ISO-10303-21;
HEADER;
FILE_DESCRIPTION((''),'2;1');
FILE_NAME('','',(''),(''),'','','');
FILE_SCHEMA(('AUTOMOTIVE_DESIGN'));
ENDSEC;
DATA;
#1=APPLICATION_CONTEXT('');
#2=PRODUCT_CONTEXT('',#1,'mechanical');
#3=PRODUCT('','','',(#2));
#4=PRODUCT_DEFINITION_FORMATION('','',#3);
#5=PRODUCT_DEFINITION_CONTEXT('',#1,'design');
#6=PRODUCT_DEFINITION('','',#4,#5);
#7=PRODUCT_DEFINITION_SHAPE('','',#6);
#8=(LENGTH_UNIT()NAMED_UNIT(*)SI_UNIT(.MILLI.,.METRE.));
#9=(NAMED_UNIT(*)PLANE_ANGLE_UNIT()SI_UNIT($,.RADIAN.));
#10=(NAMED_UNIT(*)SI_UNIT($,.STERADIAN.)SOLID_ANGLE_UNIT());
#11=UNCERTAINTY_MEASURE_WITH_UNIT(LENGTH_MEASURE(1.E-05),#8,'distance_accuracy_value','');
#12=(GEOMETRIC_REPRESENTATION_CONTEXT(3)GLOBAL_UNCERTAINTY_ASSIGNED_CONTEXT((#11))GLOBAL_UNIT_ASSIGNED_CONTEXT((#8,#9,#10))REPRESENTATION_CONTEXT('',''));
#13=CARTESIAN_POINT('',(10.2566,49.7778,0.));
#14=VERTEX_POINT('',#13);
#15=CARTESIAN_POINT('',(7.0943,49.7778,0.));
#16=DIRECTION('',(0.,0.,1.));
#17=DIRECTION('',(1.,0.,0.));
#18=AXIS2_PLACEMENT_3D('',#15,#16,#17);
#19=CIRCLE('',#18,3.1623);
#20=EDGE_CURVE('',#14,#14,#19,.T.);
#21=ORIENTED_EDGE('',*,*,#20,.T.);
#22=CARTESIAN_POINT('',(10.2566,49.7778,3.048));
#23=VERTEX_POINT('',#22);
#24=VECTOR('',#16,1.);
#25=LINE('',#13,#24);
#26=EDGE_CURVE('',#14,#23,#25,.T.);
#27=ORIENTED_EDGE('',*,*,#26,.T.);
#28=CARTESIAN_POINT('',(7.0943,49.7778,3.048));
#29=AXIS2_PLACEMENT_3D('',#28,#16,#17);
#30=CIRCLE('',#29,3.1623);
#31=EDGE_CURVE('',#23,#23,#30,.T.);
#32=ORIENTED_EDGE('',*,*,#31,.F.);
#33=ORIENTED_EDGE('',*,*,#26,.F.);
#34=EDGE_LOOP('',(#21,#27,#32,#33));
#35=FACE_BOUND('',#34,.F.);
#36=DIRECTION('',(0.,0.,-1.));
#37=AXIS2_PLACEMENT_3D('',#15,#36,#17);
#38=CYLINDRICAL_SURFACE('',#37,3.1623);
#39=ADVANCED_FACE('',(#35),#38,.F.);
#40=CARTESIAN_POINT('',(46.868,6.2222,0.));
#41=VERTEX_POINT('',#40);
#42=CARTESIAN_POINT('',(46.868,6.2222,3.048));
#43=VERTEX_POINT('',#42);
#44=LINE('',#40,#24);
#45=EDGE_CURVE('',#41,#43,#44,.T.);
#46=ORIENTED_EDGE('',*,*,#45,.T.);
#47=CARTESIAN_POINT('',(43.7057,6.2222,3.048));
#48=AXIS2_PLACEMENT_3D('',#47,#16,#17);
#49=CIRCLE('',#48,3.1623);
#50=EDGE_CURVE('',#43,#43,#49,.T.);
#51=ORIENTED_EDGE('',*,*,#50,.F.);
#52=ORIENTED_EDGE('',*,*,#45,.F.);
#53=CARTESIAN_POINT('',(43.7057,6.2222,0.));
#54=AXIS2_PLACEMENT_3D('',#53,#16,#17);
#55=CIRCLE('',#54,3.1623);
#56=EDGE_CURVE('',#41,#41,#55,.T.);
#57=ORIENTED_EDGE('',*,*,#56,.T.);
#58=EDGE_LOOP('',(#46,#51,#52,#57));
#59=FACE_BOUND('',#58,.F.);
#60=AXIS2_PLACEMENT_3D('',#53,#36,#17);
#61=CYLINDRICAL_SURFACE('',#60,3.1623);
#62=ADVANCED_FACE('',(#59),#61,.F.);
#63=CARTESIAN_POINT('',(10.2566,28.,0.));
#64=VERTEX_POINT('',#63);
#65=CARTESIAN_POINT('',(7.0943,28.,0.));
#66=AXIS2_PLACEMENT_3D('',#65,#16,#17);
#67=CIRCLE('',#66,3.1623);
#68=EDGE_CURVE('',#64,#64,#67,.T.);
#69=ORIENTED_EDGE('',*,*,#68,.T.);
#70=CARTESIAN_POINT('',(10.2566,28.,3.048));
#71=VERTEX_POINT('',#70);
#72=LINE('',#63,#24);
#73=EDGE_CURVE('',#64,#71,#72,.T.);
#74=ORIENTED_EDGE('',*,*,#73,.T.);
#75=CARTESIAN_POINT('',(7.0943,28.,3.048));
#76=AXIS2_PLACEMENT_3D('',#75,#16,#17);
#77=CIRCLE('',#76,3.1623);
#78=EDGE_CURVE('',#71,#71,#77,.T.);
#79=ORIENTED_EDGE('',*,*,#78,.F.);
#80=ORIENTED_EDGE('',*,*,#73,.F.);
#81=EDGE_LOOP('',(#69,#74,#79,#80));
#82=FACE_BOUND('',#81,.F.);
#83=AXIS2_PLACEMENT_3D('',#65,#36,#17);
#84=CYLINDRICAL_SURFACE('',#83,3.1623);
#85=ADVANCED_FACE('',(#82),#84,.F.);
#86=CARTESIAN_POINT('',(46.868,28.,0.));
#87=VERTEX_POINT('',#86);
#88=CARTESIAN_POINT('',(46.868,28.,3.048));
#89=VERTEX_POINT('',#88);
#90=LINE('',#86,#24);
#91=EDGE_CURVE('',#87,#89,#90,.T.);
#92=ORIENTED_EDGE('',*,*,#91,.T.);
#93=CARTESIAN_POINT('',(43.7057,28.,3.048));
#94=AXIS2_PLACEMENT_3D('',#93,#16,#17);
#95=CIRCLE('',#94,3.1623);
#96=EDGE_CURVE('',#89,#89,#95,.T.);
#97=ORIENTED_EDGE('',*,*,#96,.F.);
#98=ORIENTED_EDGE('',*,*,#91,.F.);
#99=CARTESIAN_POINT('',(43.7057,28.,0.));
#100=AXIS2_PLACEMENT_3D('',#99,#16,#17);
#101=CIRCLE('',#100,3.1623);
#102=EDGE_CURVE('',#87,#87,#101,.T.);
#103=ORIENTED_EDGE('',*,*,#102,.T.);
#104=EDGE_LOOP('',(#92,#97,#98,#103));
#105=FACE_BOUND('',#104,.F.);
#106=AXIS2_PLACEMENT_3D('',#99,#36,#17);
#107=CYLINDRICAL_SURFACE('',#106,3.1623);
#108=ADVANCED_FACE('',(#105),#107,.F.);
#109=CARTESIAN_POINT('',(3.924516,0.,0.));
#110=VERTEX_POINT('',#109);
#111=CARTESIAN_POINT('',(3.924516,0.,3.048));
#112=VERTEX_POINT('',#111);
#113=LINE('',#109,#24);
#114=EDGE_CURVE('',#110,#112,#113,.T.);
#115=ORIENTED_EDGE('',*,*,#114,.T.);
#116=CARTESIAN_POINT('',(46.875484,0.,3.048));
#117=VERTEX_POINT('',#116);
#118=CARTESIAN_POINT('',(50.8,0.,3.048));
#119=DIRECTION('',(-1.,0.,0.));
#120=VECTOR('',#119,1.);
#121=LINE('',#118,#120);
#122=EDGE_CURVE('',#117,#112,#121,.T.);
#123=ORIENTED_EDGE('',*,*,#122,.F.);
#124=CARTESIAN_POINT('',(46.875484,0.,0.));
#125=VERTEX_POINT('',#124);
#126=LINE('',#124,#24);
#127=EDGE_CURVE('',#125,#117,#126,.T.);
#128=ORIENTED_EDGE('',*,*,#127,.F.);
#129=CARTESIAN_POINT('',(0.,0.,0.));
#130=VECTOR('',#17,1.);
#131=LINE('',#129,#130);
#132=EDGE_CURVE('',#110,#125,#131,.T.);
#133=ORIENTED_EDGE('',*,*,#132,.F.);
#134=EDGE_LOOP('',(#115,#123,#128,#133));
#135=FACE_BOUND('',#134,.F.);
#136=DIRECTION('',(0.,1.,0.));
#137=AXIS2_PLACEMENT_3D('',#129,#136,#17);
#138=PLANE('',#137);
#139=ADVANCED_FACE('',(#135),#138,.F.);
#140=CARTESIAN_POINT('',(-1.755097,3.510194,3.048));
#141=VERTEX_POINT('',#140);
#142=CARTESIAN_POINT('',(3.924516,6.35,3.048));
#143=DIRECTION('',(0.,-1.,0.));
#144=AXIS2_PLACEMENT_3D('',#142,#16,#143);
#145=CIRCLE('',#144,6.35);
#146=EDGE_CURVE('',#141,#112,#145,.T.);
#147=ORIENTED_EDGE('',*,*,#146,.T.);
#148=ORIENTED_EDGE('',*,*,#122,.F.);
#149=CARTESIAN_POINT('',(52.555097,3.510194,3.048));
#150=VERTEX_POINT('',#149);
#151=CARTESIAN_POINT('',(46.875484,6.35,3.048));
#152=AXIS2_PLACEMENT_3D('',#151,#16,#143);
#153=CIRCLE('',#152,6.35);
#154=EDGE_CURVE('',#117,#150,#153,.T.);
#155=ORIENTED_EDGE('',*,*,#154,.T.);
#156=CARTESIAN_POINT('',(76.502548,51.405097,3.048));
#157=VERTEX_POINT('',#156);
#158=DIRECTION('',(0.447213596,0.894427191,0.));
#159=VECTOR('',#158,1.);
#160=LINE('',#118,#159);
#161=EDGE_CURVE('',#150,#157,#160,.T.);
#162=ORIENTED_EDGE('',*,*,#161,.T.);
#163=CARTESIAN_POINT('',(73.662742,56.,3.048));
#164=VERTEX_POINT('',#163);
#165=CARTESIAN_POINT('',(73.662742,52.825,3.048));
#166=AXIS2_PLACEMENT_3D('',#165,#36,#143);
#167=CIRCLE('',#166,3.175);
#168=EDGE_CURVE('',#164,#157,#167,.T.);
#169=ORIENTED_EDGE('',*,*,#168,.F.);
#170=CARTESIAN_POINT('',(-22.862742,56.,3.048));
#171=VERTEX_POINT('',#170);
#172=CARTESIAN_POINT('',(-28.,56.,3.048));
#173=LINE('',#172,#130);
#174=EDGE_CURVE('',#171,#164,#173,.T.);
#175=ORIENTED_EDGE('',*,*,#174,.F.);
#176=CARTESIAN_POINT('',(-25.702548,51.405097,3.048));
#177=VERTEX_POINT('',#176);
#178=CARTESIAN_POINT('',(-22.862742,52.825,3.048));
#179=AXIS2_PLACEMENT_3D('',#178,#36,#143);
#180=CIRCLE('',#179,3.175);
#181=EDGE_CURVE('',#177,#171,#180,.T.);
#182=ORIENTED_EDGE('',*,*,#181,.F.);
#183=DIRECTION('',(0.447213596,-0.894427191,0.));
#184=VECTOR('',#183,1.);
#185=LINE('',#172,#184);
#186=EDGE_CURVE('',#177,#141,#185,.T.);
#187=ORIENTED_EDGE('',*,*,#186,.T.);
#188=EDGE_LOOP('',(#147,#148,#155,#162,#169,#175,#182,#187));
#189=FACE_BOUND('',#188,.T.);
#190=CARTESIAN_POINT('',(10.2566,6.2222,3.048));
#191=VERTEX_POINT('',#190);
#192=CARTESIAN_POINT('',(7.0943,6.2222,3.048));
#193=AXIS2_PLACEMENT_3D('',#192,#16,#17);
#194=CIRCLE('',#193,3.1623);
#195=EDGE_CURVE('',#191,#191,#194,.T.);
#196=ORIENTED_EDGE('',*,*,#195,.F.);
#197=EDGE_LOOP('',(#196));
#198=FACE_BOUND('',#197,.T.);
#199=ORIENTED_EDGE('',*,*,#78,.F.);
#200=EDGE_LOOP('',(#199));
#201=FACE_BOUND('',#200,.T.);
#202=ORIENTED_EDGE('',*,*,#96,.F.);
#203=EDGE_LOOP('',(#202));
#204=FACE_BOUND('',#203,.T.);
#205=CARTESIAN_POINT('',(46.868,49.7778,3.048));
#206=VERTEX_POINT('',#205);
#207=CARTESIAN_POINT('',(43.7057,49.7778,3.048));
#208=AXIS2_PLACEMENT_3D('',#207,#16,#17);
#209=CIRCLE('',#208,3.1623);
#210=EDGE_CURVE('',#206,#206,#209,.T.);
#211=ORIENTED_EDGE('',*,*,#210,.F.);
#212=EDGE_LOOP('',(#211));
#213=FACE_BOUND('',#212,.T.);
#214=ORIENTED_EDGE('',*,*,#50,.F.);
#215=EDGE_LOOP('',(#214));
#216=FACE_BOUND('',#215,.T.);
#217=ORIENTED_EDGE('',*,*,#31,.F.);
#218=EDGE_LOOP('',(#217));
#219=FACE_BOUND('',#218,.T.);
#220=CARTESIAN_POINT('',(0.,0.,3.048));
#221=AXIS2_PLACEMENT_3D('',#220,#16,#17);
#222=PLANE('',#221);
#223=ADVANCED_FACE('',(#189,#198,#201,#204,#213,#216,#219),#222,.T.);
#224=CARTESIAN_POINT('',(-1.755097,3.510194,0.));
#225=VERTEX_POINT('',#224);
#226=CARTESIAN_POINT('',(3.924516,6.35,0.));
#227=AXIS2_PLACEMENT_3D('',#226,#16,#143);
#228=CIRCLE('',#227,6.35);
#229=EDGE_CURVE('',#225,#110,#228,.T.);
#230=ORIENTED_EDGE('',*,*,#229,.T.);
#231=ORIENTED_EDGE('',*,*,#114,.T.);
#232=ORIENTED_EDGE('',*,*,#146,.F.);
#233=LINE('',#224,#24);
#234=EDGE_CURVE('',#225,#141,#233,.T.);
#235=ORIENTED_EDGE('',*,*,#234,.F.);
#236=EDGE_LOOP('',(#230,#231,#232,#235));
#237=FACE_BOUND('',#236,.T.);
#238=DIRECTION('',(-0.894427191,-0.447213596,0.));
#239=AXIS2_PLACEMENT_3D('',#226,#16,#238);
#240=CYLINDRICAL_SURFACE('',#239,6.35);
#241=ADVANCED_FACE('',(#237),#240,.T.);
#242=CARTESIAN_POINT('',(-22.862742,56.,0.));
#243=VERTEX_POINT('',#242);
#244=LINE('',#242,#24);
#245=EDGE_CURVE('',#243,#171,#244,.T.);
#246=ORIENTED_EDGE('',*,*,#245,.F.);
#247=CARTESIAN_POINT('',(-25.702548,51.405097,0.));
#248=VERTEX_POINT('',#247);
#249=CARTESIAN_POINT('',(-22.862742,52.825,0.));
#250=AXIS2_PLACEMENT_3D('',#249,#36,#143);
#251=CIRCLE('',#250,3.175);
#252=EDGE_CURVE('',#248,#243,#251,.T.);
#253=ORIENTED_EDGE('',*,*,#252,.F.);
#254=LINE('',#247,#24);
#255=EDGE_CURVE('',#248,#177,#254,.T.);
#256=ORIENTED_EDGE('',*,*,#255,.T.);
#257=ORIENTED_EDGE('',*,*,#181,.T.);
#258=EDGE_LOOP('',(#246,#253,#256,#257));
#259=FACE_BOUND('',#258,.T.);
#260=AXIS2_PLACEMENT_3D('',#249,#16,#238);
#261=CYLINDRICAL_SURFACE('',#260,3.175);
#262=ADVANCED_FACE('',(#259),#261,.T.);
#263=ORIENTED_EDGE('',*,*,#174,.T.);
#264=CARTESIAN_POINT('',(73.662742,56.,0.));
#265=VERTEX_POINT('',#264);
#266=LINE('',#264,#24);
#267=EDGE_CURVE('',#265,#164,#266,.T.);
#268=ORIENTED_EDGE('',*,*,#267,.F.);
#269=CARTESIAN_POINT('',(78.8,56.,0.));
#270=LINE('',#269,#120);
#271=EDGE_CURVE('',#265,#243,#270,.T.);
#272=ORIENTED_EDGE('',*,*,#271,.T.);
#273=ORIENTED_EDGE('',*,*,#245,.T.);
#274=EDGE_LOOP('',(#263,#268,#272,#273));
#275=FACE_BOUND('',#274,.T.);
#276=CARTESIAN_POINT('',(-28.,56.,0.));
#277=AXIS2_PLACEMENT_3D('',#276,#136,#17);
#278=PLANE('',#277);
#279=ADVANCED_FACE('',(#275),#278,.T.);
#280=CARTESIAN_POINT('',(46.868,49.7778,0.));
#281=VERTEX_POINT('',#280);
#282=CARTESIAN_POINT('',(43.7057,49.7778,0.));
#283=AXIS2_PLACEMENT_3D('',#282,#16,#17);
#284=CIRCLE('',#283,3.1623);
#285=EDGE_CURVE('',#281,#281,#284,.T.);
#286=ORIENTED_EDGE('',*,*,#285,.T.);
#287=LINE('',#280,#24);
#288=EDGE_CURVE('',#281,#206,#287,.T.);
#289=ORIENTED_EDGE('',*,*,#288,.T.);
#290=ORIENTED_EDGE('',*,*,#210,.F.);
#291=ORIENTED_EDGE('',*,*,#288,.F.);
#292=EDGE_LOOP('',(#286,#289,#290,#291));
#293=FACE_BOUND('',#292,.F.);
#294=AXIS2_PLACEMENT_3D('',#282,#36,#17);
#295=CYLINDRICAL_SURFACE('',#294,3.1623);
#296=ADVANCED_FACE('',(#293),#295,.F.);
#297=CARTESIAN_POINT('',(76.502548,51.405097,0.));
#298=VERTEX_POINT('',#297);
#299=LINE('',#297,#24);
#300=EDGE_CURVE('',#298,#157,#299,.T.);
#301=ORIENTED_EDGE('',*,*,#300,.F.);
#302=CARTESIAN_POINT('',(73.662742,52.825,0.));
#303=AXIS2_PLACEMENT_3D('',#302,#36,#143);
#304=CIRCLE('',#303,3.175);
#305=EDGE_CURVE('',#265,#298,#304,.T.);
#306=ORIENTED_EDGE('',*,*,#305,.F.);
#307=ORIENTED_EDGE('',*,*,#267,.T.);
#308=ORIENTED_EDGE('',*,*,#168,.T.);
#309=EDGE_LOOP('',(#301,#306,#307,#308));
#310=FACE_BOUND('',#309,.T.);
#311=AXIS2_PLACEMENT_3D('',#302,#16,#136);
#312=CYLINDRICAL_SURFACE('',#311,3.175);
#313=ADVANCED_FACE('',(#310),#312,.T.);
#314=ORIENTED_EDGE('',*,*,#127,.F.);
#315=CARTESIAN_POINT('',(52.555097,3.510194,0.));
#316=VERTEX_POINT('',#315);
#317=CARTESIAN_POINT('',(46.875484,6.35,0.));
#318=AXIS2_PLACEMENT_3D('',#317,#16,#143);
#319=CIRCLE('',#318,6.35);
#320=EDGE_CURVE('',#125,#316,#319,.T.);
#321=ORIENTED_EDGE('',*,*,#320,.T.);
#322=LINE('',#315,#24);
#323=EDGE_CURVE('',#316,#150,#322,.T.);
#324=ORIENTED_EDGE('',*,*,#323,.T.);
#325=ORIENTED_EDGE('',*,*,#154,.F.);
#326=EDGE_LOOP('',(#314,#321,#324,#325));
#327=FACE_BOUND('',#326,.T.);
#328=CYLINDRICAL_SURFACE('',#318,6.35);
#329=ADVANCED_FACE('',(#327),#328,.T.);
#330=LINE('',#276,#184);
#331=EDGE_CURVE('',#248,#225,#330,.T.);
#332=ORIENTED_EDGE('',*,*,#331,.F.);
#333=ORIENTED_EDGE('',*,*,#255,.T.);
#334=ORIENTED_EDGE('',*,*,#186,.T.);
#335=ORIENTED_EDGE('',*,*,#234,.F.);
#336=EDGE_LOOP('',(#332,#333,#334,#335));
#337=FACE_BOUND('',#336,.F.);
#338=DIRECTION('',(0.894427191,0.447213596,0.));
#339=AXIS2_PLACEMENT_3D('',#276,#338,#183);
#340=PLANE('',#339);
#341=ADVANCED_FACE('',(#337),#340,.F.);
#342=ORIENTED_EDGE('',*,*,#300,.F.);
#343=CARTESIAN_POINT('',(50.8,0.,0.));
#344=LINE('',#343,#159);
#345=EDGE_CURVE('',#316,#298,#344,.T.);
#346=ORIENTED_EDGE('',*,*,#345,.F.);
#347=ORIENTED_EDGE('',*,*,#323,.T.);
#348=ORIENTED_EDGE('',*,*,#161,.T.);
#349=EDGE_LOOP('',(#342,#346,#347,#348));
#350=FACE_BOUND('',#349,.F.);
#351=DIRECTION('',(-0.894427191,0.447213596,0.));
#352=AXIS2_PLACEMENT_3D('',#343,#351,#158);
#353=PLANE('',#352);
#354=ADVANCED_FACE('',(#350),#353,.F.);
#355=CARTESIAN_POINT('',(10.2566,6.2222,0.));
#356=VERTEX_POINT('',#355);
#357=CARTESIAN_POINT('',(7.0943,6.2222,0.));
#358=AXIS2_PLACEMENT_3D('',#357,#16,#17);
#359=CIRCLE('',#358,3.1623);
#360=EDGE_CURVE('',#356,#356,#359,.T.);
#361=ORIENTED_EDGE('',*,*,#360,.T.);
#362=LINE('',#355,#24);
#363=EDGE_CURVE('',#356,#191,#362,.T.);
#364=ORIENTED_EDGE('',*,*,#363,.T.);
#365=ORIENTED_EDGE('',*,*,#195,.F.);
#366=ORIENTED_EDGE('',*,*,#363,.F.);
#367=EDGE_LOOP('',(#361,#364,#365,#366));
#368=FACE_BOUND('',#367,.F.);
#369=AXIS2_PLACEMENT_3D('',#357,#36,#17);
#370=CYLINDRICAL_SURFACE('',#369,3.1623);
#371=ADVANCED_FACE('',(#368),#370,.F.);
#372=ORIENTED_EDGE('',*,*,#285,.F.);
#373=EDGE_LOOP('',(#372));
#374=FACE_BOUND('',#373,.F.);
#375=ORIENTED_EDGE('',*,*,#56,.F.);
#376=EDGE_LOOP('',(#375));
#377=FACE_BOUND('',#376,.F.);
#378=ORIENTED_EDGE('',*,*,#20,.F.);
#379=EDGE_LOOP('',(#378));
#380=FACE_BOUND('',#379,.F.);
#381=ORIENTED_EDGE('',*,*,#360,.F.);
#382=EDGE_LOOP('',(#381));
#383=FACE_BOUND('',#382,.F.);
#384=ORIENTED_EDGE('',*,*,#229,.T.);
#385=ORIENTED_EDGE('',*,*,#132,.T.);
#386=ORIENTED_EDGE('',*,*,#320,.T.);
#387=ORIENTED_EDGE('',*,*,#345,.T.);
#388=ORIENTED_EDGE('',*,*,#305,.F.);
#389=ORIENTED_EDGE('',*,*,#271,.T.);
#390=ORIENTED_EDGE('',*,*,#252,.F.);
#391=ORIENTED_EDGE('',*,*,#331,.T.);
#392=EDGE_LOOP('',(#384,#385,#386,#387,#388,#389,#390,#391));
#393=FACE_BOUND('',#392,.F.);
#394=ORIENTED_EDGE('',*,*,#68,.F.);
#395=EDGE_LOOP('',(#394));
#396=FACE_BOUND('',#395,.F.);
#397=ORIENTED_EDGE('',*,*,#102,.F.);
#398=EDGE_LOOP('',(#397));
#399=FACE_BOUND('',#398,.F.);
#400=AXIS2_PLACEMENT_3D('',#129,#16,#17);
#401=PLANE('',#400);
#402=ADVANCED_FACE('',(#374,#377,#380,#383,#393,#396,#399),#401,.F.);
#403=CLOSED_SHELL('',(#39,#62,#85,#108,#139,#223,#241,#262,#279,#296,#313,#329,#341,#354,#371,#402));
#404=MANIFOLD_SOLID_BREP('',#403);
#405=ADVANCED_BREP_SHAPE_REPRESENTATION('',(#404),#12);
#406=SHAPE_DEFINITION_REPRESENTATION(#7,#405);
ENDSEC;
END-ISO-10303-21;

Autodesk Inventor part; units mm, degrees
ref_plane "YZ Plane" through (0, 0, 0) normal (1, 0, 0) x (0, 1, 0)
ref_plane "XZ Plane" through (0, 0, 0) normal (0, 1, 0) x (-1, 0, 0)
ref_plane "XY Plane" through (0, 0, 0) normal (0, 0, 1) x (1, 0, 0)
sketch "Sketch1" plane through (0, 0, 0) normal (0, 0, 1) x (1, 0, 0)
  line L0 (0, 0) -> (50.8, 0)
  line L1 (-50.8, 101.6) -> (101.6, 101.6)
  line L2 (50.8, 0) -> (78.8, 56)
  line L3 (-28, 56) -> (0, 0)
  line L4 (14.6239, 7) -> (34.6239, 7)
  line L5 (34.6239, 7) -> (34.6239, 2)
  line L6 (34.6239, 2) -> (14.6239, 2)
  line L7 (14.6239, 2) -> (14.6239, 7)
  line L8 (50.8, 0) -> (50.8, 62.4863)
  line L9 (14.6239, 14) -> (34.6239, 14)
  line L10 (34.6239, 14) -> (34.6239, 9)
  line L11 (34.6239, 9) -> (14.6239, 9)
  line L12 (14.6239, 9) -> (14.6239, 14)
  line L13 (14.6239, 21) -> (34.6239, 21)
  line L14 (34.6239, 21) -> (34.6239, 16)
  line L15 (34.6239, 16) -> (14.6239, 16)
  line L16 (14.6239, 16) -> (14.6239, 21)
  line L17 (14.6239, 28) -> (34.6239, 28)
  line L18 (34.6239, 28) -> (34.6239, 23)
  line L19 (34.6239, 23) -> (14.6239, 23)
  line L20 (14.6239, 23) -> (14.6239, 28)
  line L21 (14.6239, 35) -> (34.6239, 35)
  line L22 (34.6239, 35) -> (34.6239, 30)
  line L23 (34.6239, 30) -> (14.6239, 30)
  line L24 (14.6239, 30) -> (14.6239, 35)
  line L25 (14.6239, 42) -> (34.6239, 42)
  line L26 (34.6239, 42) -> (34.6239, 37)
  line L27 (34.6239, 37) -> (14.6239, 37)
  line L28 (14.6239, 37) -> (14.6239, 42)
  circle A0 centre (43.7057, 6.2222) radius 3.1623
  circle A1 centre (43.7057, 28) radius 3.1623
  circle A2 centre (43.7057, 49.7778) radius 3.1623
  line L29 (25.4, 0) -> (25.4, -15.6085)
  circle A3 centre (7.0943, 49.7778) radius 3.1623
  circle A4 centre (7.0943, 6.2222) radius 3.1623
  circle A5 centre (7.0943, 28) radius 3.1623
  line L30 (34.6239, 44) -> (14.6239, 44)
  line L31 (14.6239, 44) -> (14.6239, 49)
  line L32 (34.6239, 49) -> (34.6239, 44)
  line L33 (14.6239, 49) -> (34.6239, 49)
  line L34 (34.6239, 51) -> (14.6239, 51)
  line L35 (14.6239, 51) -> (14.6239, 56)
  line L36 (14.6239, 56) -> (34.6239, 56)
  line L37 (34.6239, 56) -> (34.6239, 51)
  circle A6 centre (-34.29, 91.44) radius 3.1623
  circle A7 centre (85.09, 91.44) radius 3.1623
  line L38 (-28, 56) -> (78.8, 56)
  dimension "d8" = 50.8
  dimension "d9" = 152.4
  dimension "d10" = 101.6
  dimension "d11" = 50.8
  dimension "d12" = 20
  dimension "d13" = 5
  dimension "d14" = 2
  dimension "d15" = 7
  dimension "d16" = 6.3246
  dimension "d17" = 6.3246
  dimension "d18" = 6.3246
  dimension "d19" = 14
  dimension "d20" = 56
  dimension "d21" = 6.2222
  dimension "d22" = 6.2222
  dimension "d23" = 28
  dimension "d24" = 6.3246
  dimension "d25" = 6.3246
  dimension "d26" = 34.29
  dimension "d27" = 34.29
  dimension "d28" = 10.16
  dimension "d29" = 10.16
extrude "Plate1" add sketch "Sketch1" along normal blind 3.048 contours L3 L38 L35 L34 L37 L8 L0 | L8 L38 L2 | L36 L37 L34 L35 | L4 L5 L6 L7 | L9 L10 L11 L12 | L13 L14 L15 L16 | L17 L18 L19 L20 | L21 L22 L23 L24 | L25 L26 L27 L28 | L30 L31 L33 L32
fillet "Corner Round1" radius 6.35 2 edges at (0, 0, 1.524) (50.8, 0, 1.524)
fillet "Corner Round1" radius 3.175 2 edges at (-28, 56, 1.524) (78.8, 56, 1.524)
equation "\"d17\" = d16"
equation "\"d18\" = d17"
equation "\"d21\" = 0.111111 * d20"
equation "\"d22\" = d21"
equation "\"d23\" = 0.5 * d20"
equation "\"d27\" = d26"
equation "\"d29\" = d28"
equation "\"BendRadius\" = Thickness"
equation "\"BendReliefWidth\" = Thickness"
equation "\"BendReliefDepth\" = 0.5 * Thickness"
equation "\"CornerReliefSize\" = 4 * Thickness"
equation "\"MinimumRemnant\" = 2 * Thickness"
equation "\"TransitionRadius\" = BendRadius"
equation "\"JacobiRadiusSize\" = BendRadius"
equation "\"GapSize\" = Thickness"
equation "\"d32\" = BendRadius"
equation "\"Thickness\" = 3.048"
properties part number "Belt plate top"
